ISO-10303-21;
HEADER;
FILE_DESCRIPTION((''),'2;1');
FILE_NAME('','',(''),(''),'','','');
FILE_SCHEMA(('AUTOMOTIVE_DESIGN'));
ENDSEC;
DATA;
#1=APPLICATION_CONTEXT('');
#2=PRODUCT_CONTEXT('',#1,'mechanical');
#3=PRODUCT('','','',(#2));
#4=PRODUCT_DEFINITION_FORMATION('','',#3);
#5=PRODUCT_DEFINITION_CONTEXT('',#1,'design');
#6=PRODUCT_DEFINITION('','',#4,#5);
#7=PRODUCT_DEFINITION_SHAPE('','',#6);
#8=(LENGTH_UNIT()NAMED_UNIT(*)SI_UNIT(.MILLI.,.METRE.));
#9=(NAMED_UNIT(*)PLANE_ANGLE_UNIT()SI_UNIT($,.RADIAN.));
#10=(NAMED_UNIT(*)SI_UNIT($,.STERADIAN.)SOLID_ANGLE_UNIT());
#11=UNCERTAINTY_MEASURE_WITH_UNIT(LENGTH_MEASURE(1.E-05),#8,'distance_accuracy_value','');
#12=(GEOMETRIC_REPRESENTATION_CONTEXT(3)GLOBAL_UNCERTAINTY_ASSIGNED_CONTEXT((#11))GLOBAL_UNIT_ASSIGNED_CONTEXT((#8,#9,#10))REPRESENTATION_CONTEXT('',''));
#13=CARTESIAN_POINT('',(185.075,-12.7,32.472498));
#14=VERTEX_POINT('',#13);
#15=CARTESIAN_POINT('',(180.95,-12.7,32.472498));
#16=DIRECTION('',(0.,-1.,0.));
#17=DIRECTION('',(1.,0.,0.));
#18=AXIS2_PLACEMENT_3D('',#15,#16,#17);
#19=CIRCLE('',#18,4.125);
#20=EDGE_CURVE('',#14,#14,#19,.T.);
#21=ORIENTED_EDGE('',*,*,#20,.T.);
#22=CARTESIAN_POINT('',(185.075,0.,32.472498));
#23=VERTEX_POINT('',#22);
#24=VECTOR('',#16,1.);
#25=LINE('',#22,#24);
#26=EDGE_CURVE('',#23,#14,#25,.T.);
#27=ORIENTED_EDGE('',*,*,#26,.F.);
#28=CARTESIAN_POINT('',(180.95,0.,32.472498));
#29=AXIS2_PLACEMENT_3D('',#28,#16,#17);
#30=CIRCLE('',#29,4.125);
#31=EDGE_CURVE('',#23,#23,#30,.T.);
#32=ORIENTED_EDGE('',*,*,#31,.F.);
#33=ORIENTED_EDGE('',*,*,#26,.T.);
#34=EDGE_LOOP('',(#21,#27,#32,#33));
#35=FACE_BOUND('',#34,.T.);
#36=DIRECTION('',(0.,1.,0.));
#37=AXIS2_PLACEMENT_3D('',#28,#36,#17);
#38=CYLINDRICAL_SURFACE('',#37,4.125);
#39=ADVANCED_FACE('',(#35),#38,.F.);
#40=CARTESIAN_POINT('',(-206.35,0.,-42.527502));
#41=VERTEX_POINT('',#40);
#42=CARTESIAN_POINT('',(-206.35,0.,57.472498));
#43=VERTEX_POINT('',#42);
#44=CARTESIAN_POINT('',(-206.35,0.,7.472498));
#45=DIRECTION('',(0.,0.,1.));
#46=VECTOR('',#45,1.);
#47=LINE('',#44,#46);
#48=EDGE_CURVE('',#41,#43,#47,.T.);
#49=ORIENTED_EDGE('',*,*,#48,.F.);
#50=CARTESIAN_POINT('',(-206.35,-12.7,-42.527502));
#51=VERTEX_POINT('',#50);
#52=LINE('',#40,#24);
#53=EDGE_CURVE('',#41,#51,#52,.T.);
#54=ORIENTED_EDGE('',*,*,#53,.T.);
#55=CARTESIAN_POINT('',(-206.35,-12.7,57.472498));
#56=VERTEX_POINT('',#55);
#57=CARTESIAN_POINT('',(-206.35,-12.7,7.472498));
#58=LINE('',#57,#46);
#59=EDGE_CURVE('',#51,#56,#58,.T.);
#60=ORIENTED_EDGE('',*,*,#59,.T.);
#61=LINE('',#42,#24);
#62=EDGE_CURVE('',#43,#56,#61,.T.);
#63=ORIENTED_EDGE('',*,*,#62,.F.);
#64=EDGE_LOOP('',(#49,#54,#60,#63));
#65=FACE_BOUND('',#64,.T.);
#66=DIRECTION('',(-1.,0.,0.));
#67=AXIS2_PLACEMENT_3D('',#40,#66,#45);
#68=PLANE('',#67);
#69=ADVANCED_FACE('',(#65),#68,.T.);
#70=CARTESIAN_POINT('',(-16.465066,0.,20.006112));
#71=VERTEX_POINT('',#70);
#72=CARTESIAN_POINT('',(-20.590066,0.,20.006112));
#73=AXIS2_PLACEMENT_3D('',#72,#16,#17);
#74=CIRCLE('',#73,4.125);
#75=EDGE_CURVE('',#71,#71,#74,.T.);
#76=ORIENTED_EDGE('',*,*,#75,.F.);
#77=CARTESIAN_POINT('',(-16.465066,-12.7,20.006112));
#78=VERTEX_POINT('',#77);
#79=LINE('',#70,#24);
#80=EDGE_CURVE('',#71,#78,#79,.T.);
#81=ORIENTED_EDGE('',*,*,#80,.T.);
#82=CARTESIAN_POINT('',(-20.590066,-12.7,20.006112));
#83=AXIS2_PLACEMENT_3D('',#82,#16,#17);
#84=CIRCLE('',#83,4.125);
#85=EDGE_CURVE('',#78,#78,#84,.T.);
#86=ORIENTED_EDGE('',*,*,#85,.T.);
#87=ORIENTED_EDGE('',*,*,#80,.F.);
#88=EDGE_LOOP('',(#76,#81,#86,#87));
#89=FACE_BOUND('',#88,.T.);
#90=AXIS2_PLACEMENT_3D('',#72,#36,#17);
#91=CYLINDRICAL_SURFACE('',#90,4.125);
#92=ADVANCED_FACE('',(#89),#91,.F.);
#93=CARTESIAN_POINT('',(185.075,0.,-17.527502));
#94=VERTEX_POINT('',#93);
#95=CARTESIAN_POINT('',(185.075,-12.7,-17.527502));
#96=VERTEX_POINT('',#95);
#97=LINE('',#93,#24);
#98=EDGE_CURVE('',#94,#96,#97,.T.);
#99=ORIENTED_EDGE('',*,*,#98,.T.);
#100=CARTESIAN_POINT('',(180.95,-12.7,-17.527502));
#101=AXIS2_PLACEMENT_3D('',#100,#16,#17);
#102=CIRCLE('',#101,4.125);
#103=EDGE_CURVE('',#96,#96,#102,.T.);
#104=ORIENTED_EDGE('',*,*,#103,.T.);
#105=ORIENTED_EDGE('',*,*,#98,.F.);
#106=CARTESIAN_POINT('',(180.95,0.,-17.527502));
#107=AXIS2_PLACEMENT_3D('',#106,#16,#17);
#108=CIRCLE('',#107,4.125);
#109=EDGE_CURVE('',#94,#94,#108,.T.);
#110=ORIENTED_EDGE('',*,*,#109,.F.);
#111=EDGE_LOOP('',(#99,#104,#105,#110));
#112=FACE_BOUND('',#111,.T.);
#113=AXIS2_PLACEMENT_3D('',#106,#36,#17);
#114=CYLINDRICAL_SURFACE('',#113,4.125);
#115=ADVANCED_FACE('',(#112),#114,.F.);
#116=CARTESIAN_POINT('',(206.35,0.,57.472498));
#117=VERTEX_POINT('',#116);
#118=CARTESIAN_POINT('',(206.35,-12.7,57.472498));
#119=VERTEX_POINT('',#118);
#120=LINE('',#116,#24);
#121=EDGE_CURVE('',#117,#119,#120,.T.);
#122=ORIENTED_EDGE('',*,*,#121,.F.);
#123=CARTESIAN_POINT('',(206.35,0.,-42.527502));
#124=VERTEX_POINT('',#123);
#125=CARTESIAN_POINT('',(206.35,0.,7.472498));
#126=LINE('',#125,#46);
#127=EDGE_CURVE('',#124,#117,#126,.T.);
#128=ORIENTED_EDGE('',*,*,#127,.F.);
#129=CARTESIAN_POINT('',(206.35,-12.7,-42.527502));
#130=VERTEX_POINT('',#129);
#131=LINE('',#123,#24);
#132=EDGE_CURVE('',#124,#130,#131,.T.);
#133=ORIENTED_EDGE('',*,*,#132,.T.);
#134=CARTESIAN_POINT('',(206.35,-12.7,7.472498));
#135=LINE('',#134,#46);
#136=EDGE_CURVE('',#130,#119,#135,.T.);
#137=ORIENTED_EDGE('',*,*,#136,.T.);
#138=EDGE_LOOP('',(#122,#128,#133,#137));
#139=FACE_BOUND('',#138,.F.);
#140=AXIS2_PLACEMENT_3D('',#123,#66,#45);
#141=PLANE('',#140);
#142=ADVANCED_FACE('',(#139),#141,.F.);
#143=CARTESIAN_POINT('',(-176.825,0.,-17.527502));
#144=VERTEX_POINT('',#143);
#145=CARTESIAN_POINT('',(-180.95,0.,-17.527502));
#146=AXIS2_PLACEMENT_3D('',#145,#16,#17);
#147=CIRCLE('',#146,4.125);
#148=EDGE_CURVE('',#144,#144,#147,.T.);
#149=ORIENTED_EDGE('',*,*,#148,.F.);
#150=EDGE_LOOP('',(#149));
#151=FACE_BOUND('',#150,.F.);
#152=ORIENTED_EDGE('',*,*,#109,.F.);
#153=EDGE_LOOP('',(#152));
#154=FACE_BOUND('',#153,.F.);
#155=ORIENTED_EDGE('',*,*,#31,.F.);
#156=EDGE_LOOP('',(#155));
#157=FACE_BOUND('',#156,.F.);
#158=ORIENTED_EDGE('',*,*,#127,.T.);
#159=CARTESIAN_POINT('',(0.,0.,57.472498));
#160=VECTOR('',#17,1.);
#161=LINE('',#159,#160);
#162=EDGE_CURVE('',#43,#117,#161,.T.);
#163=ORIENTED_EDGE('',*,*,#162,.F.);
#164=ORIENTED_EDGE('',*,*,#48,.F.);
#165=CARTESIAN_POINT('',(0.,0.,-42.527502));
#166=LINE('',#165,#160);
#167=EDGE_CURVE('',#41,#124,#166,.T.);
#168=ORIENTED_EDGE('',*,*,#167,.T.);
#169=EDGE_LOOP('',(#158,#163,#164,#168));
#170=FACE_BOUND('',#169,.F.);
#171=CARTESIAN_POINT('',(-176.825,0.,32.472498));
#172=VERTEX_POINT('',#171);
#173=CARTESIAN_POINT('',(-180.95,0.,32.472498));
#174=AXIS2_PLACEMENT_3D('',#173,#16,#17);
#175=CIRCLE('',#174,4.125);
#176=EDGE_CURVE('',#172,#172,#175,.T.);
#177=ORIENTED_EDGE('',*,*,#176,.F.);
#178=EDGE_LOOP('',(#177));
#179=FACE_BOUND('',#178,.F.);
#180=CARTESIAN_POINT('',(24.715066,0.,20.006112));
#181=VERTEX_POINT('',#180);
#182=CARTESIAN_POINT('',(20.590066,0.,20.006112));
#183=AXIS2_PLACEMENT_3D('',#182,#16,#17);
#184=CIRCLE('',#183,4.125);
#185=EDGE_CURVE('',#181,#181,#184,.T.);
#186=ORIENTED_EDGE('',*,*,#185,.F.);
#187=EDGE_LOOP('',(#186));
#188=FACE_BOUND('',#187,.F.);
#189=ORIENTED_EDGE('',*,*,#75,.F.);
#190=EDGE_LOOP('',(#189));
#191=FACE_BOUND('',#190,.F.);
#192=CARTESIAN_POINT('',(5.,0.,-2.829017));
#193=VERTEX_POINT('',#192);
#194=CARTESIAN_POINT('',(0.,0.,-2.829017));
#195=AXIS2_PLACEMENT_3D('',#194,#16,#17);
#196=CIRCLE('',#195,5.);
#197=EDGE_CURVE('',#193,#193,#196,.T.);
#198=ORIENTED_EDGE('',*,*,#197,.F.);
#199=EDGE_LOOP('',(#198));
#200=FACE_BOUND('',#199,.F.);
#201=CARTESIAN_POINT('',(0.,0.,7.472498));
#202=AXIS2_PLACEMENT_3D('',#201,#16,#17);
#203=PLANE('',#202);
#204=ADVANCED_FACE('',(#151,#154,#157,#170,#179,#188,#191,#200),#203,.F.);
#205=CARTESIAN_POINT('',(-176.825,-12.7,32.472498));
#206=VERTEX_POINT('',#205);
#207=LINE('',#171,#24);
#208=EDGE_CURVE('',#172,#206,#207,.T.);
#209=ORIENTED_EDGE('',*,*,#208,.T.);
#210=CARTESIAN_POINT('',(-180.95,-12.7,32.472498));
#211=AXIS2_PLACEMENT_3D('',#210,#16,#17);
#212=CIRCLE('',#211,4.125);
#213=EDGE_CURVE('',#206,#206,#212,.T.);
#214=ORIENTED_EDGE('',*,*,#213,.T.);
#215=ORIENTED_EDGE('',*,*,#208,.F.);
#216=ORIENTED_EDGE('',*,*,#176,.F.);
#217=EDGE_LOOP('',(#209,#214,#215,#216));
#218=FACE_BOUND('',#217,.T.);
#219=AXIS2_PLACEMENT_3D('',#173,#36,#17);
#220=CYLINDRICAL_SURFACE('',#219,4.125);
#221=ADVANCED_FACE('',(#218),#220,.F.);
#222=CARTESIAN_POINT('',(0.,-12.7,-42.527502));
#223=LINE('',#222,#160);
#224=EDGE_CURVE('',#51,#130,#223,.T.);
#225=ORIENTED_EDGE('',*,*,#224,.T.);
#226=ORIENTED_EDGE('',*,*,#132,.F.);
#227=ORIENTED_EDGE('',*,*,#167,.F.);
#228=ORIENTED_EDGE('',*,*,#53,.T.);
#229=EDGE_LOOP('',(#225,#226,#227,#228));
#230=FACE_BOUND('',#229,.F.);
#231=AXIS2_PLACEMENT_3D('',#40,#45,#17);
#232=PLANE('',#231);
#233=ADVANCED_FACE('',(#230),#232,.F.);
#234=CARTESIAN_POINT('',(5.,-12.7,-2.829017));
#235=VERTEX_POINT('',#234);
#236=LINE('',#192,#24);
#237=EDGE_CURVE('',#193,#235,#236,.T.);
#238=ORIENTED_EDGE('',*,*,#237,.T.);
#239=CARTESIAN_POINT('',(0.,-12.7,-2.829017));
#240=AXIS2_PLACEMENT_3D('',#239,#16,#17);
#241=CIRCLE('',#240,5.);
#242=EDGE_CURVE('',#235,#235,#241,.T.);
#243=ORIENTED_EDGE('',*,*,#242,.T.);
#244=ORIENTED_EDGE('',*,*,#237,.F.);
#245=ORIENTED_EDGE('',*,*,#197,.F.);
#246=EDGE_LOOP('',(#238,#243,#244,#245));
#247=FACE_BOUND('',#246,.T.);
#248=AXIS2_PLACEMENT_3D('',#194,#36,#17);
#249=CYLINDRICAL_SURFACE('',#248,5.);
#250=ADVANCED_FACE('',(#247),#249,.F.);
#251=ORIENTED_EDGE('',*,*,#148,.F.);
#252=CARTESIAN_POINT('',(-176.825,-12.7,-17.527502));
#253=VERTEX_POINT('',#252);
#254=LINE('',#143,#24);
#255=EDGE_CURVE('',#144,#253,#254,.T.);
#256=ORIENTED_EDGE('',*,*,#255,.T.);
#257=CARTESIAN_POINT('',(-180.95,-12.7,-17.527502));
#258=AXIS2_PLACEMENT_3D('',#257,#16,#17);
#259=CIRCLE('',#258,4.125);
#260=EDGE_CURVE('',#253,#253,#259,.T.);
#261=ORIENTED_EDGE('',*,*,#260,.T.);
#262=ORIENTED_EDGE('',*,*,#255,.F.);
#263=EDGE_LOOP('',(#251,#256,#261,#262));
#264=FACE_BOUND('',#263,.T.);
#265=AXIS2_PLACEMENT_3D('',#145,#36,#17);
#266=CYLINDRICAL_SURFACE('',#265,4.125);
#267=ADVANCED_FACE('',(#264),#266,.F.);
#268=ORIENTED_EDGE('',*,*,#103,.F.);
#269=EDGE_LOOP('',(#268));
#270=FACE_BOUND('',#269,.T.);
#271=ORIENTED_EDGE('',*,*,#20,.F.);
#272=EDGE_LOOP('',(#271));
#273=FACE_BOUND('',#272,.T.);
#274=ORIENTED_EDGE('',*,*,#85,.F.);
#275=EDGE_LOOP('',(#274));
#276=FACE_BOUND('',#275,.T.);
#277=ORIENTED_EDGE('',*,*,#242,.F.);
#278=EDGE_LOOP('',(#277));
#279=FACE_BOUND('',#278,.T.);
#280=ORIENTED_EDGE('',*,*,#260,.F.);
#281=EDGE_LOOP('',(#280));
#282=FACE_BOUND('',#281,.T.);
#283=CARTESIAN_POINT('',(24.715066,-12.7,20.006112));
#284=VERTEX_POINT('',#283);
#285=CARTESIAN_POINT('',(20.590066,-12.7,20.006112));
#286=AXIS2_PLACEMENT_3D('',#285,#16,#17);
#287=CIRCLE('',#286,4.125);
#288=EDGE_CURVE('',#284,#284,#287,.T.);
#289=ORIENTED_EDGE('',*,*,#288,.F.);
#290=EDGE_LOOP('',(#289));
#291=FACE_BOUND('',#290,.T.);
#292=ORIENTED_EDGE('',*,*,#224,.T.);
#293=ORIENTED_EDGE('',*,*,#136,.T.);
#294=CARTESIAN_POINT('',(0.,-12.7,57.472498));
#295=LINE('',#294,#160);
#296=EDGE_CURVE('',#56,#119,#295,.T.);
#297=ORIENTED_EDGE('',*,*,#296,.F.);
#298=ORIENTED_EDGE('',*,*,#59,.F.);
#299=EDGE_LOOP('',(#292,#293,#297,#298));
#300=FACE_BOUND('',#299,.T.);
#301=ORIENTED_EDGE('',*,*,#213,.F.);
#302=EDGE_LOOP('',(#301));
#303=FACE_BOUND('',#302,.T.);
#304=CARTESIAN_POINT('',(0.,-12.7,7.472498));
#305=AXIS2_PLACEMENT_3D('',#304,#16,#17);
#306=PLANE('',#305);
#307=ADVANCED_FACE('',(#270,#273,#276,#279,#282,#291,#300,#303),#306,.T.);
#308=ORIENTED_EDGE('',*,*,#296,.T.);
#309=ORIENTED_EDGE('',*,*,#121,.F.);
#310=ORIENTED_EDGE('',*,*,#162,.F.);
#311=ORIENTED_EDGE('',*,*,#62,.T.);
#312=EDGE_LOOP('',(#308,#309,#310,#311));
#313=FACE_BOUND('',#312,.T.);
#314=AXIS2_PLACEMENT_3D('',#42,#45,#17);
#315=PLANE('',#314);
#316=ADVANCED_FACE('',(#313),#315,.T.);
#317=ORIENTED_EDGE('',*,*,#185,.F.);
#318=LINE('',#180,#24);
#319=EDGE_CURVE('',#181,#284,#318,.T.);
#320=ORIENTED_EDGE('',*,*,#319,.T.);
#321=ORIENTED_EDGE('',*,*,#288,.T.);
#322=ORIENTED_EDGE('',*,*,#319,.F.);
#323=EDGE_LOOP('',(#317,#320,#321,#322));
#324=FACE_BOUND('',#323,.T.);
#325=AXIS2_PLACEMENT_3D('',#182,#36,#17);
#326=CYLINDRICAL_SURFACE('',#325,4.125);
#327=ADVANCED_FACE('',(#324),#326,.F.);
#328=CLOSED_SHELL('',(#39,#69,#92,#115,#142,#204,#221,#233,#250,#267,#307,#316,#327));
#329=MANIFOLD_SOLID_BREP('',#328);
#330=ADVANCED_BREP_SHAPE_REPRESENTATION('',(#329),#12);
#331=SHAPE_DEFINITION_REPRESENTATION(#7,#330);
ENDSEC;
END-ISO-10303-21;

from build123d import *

# Parameters (mm, degrees)
F0_W     = 412.7
F0_H     = 100
F0_R     = 4.125
F0_R_2   = 5
F1_DEPTH = 12.7


# Not quite as in the source:
# - a length typed as a fraction of an inch, garbled in the dataset ("3 / 203.2 mm" for 3/8 in), is restored


with BuildPart() as f1:
    # F0 (on Front) → F1 (new body)
    with BuildSketch(Plane.XZ):
        with Locations((0, 7.472498)):
            Rectangle(F0_W, F0_H)
        with Locations((-180.95, -17.527502)):
            Circle(F0_R, mode=Mode.SUBTRACT)
        with Locations((0, -2.829017)):
            Circle(F0_R_2, mode=Mode.SUBTRACT)
        with Locations((180.95, -17.527502)):
            Circle(F0_R, mode=Mode.SUBTRACT)
        with Locations((-20.590066, 20.006112)):
            Circle(F0_R, mode=Mode.SUBTRACT)
        with Locations((-180.95, 32.472498)):
            Circle(F0_R, mode=Mode.SUBTRACT)
        with Locations((20.590066, 20.006112)):
            Circle(F0_R, mode=Mode.SUBTRACT)
        with Locations((180.95, 32.472498)):
            Circle(F0_R, mode=Mode.SUBTRACT)
    extrude(amount=F1_DEPTH)


solid = f1.part
